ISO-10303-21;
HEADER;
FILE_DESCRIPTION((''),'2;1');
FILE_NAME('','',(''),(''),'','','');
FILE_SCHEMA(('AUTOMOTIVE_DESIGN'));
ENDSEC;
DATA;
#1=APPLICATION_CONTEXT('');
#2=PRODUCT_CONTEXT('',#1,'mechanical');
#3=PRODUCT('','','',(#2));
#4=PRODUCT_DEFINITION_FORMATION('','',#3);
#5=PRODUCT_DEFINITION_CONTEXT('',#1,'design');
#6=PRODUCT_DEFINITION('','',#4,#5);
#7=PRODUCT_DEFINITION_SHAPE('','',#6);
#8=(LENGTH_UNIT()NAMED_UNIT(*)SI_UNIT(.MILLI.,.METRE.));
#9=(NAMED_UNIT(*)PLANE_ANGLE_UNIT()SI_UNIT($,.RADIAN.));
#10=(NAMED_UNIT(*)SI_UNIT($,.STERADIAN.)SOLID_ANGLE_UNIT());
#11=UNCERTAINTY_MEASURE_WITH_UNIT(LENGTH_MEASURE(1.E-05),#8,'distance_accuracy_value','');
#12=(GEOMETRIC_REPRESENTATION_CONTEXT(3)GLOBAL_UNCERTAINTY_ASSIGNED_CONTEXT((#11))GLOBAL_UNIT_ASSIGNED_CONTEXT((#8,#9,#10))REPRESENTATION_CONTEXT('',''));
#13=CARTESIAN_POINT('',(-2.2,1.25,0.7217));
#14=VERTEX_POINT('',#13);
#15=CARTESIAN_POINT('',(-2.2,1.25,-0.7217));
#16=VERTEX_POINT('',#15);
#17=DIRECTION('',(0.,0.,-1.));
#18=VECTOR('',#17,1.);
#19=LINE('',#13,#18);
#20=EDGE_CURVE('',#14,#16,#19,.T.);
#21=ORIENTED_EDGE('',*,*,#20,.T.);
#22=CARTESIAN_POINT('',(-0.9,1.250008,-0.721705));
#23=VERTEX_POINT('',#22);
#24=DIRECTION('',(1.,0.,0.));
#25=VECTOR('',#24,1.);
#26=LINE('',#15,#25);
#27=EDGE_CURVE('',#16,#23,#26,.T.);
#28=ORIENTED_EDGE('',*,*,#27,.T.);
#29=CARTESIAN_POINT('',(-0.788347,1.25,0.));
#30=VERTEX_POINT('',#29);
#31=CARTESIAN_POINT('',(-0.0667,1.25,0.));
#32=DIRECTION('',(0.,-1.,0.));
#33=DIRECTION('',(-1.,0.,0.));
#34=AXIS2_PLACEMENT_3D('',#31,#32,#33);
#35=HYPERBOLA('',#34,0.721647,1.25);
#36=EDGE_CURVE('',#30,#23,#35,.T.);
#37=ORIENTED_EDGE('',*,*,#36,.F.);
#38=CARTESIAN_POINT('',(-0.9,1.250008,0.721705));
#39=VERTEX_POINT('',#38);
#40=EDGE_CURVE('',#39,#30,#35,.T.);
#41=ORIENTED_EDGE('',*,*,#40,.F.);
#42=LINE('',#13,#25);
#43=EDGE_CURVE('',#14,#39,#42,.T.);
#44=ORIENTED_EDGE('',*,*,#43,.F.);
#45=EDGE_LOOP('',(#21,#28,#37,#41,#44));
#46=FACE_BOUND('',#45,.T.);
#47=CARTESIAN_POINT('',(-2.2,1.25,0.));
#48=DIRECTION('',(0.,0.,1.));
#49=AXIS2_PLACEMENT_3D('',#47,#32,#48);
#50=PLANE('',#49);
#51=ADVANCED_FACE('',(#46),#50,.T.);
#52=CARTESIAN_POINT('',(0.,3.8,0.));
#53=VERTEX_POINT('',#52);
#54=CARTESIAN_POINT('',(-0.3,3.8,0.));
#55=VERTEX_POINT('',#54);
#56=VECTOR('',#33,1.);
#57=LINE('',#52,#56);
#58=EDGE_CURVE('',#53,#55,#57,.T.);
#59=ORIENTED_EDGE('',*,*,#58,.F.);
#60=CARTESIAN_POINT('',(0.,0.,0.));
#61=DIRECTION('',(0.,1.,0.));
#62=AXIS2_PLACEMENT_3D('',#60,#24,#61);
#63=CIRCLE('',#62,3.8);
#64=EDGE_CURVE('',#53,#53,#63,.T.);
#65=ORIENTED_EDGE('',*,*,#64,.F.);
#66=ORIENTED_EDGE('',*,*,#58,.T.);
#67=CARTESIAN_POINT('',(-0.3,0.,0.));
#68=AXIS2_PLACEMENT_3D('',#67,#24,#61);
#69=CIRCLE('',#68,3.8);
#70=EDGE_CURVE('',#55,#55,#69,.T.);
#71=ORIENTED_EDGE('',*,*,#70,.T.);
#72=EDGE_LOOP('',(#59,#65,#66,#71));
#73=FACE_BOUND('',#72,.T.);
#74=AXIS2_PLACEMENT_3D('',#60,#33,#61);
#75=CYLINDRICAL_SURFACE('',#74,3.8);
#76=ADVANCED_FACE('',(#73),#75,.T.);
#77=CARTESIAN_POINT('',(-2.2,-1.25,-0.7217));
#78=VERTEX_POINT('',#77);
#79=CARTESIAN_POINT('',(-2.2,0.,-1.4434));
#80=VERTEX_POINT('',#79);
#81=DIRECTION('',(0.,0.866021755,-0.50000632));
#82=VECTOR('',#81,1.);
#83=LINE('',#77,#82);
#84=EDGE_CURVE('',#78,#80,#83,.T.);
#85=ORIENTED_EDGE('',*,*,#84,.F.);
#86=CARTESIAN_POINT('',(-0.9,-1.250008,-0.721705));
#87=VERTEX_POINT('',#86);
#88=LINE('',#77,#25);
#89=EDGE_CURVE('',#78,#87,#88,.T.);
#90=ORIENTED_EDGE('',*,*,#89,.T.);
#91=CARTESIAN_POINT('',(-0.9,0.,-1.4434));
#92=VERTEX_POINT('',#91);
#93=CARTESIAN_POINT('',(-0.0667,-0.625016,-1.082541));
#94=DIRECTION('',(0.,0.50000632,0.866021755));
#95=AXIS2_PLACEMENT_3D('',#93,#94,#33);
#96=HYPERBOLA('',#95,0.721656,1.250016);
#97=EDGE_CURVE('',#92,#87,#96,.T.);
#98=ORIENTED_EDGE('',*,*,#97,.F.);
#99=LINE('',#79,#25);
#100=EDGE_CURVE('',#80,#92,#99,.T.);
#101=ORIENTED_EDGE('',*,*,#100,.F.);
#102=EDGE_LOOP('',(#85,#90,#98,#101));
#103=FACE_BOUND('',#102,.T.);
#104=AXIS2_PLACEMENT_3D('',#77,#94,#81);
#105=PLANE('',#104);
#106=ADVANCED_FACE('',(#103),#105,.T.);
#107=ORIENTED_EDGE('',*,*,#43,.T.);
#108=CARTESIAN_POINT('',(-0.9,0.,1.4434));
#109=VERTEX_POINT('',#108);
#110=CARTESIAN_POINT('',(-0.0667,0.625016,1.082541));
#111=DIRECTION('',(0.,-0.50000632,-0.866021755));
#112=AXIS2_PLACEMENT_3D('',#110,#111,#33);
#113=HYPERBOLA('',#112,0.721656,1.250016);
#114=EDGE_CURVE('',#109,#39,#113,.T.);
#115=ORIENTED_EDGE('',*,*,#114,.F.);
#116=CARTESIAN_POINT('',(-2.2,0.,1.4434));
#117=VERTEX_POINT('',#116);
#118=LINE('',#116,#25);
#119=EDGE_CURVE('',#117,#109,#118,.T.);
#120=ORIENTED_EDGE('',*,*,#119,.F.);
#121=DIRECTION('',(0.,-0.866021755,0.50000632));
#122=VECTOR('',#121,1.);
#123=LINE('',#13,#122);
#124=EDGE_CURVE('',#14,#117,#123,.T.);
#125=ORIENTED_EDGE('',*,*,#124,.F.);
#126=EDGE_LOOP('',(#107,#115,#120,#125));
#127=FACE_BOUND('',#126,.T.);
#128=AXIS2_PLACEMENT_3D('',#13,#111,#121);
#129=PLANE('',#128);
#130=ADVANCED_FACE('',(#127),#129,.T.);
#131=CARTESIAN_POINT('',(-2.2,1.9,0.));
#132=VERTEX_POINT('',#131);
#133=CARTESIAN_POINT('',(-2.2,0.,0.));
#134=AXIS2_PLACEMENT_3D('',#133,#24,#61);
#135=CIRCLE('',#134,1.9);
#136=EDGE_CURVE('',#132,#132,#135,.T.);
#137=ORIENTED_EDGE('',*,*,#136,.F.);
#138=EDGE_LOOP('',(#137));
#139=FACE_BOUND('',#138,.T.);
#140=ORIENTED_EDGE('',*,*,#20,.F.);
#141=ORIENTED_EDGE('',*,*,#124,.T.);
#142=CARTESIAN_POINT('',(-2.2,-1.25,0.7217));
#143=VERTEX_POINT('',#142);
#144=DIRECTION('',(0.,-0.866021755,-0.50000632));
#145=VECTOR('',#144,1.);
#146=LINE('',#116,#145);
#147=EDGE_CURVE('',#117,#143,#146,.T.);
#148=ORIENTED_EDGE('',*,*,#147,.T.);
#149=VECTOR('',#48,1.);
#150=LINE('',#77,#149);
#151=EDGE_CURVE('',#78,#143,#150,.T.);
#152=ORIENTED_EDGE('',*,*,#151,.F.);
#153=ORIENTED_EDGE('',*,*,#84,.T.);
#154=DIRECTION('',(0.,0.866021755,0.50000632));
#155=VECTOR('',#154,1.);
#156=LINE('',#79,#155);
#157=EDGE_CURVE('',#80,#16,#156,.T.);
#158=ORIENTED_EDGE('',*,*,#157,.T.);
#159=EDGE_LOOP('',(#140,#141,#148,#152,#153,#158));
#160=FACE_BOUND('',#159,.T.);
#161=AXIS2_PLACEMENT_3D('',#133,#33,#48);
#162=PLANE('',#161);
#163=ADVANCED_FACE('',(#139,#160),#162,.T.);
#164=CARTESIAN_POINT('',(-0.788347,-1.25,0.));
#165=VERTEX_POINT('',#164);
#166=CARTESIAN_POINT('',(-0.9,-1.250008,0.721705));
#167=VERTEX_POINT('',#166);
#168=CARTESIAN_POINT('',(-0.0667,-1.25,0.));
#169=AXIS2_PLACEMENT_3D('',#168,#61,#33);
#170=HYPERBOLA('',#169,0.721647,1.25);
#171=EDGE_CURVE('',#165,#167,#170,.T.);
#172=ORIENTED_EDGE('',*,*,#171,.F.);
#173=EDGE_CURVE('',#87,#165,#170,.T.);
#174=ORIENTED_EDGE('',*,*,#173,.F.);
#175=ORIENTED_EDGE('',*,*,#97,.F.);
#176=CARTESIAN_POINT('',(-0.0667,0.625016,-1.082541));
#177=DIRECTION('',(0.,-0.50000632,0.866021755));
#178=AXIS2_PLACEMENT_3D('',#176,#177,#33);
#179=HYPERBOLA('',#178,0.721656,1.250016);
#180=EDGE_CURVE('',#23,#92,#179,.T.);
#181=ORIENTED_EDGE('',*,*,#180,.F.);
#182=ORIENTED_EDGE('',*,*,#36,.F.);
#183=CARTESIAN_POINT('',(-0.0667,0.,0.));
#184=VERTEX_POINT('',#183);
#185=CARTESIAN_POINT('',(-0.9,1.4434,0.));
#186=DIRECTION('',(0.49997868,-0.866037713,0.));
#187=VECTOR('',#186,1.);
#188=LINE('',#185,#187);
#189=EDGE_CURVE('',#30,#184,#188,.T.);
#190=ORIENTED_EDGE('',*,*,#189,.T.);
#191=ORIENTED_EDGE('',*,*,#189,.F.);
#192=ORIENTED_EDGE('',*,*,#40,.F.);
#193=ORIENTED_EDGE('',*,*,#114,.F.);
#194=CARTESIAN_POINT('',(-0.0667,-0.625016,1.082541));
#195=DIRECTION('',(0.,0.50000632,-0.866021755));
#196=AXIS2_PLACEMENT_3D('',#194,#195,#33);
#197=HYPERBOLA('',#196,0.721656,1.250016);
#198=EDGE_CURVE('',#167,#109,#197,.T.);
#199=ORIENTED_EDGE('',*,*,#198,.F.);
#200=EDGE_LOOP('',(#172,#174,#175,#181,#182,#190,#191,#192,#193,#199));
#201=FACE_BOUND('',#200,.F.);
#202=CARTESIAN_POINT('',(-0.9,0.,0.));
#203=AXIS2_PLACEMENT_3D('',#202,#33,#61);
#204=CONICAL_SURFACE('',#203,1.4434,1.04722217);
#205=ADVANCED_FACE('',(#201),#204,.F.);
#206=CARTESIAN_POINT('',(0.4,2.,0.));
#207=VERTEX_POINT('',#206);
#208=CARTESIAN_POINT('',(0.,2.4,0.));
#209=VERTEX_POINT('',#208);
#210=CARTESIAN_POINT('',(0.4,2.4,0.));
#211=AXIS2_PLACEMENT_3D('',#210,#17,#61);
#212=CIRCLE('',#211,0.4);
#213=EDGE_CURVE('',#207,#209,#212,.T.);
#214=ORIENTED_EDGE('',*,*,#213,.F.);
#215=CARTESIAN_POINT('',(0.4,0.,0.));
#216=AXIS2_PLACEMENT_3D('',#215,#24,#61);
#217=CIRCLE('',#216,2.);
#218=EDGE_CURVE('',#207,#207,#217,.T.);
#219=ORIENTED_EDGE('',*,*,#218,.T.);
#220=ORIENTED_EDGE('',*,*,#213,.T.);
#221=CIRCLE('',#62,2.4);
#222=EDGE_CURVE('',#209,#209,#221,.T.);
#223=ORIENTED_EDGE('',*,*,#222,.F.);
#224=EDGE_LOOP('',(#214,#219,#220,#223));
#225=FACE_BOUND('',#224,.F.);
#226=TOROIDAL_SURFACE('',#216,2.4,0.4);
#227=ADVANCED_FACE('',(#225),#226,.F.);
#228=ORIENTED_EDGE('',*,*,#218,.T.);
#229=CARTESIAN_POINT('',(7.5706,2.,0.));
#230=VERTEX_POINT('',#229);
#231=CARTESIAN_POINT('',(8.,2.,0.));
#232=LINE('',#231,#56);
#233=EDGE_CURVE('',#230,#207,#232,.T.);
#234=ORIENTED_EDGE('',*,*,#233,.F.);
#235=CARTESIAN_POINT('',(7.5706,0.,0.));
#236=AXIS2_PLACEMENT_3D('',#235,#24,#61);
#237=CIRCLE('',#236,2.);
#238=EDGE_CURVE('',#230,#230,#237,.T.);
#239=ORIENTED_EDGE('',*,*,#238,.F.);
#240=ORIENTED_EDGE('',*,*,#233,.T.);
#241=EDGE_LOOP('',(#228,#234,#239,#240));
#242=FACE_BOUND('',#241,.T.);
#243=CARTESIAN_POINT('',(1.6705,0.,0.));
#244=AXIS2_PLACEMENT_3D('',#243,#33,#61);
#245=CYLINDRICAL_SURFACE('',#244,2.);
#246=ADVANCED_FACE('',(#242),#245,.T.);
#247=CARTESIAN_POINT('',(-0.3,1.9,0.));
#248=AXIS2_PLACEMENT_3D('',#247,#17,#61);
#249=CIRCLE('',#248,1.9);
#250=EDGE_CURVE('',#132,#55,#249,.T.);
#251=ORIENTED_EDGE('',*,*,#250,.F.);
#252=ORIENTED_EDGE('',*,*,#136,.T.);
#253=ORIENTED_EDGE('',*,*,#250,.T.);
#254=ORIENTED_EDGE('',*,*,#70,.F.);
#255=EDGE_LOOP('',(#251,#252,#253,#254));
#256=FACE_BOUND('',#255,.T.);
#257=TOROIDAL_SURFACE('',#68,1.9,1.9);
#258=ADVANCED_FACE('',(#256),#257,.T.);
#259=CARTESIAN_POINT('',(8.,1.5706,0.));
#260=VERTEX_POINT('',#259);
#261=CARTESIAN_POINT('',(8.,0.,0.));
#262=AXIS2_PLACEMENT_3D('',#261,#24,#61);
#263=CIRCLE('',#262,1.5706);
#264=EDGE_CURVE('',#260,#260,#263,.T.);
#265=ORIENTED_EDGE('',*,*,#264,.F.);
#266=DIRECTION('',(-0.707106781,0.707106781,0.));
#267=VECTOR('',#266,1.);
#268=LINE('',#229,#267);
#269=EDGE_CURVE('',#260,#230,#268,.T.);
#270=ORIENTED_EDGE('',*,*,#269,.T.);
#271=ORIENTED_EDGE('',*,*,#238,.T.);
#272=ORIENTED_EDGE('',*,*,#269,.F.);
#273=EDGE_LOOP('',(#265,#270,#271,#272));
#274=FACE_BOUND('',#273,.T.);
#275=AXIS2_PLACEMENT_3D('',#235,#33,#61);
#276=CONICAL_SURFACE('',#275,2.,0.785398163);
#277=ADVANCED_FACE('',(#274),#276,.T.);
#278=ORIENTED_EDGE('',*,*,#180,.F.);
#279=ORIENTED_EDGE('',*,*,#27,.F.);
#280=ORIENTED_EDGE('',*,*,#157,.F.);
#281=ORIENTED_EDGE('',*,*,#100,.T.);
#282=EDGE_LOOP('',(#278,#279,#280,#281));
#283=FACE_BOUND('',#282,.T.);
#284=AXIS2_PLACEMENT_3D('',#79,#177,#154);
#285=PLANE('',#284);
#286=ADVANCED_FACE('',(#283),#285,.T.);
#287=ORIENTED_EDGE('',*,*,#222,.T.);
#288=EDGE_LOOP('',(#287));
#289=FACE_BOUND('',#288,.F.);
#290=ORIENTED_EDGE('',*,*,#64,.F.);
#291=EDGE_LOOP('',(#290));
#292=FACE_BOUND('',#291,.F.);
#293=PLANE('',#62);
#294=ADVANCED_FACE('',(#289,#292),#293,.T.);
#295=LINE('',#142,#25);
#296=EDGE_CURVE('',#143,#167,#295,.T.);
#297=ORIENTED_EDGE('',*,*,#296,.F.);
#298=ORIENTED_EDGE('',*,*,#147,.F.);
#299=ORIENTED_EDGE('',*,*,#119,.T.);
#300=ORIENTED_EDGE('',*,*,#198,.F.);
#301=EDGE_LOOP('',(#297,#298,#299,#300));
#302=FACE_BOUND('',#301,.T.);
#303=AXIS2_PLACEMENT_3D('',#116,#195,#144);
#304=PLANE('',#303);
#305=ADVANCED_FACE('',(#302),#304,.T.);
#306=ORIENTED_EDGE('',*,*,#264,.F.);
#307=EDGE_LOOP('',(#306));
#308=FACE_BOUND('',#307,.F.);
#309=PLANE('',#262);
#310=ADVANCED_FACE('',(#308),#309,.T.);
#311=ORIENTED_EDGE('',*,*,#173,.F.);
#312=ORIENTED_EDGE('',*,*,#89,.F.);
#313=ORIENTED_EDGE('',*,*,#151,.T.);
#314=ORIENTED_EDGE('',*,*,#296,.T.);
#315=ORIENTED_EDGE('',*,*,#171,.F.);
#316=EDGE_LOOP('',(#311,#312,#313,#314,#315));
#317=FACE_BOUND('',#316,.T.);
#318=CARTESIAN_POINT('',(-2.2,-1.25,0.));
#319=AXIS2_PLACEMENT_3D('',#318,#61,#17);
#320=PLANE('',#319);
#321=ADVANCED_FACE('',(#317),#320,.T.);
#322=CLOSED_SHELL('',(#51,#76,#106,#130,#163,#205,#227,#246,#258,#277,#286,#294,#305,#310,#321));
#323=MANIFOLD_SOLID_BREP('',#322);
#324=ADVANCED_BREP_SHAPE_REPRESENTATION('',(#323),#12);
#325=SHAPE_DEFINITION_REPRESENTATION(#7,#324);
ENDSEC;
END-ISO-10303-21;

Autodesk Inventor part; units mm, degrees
ref_plane "YZ Plane" through (0, 0, 0) normal (1, 0, 0) x (0, 1, 0)
ref_plane "XZ Plane" through (0, 0, 0) normal (0, 1, 0) x (-1, 0, 0)
sketch "Эскиз1" plane through (0, 0, 0) normal (0, 0, 1) x (1, 0, 0)
  line L0 (-0.0667, 0) -> (8, 0)
  line L1 (8, 0) -> (8, 2)
  line L2 (8, 2) -> (2.1, 2)
  line L3 (2.1, 2) -> (1.6705, 2)
  line L4 (1.6705, 2) -> (0, 2)
  line L5 (0, 2) -> (0, 3.8)
  line L6 (0, 3.8) -> (-2.2, 3.8)
  line L7 (-2.2, 3.8) -> (-2.2, 1.4434)
  line L8 (-2.2, 1.4434) -> (-0.9, 1.4434)
  line L9 (-0.9, 1.4434) -> (-0.0667, 0)
  line L10 (-4.24, 0) -> (10.04, 0) projected
  line L11 (0, -0.76) -> (0, 4.56) projected
  line L12 (2.1, 2) -> (0, 2) construction
  dimension "d1" = 5.9
  dimension "d2" = 0.4295
  dimension "d3" = 2.2
  dimension "d4" = 1.3
  dimension "d5" = 60
  dimension "d6" = 4
  dimension "d7" = 4
  dimension "d8" = 2.8868
  dimension "d9" = 7.6
  dimension "d26" = 8
revolve "Базовый элемент" add sketch "Эскиз1" angle 360 about axis through (-0.0667, 0, 0) along (1, 0, 0)
sketch "Эскиз2" plane through (-2.2, 0, 0) normal (-1, 0, 0) x (0, 0, 1)
  circle A0 centre (0, 0) radius 1.4434 projected
  line L0 (0, -5.32) -> (0, 5.32) projected
  line L1 (-5.32, 0) -> (5.32, 0) projected
  line L2 (1.4434, 0) -> (0.7217, -1.25)
  line L3 (0.7217, -1.25) -> (-0.7217, -1.25)
  line L4 (-0.7217, -1.25) -> (-1.4434, 0)
  line L5 (-1.4434, 0) -> (-0.7217, 1.25)
  line L6 (-0.7217, 1.25) -> (0.7217, 1.25)
  line L7 (0.7217, 1.25) -> (1.4434, 0)
  point P0 (0, 0)
extrude "Паз" add sketch "Эскиз2" against normal up to next contours L7 A0 | A0 L2 | L6 L0 A0 | A0 L0 L3 | L0 L6 A0 | A0 L3 L0 | L4 A0 | A0 L5
fillet "Сопряжение1" radius 1.9 1 edges at (-2.2, -3.8, 0)
thread "Резьба" size "M4x0.7" class "6g" standard "ISO Metric profile" length 5.9
chamfer "Фаска1" distance 0.4294 distance2 0.4294 1 edges at (8, -2, 0) measured on face at (8, 0.556, 0.0273)
ref_plane "Work Plane1" through (29, 0, 0) normal (0, -1, 0) x (1, 0, 0)
fillet "Сопряжение2" radius 0.4 1 edges at (0, -2, 0)
equation "\"d17\" = RR"
equation "\"d13\" = GEL"
equation "\"d15\" = -0.5 * SPD + 0.5 * GD"
equation "\"d16\" = GUL"
equation "\"d30\" = R"
equation "\"d1\" = GEL"
equation "\"d3\" = KOH"
equation "\"d4\" = INTI"
equation "\"d6\" = GD"
equation "\"d7\" = BDM"
equation "\"d8\" = 1.1547 * SW"
equation "\"d9\" = KOD"
equation "\"d26\" = NLG"
equation "\"GD\" = NND"
equation "\"NLG\" = 8"
equation "\"GEL\" = 5.9"
equation "\"KOD\" = 7.6"
equation "\"KOH\" = 2.2"
equation "\"INTI\" = 1.3"
equation "\"GAL\" = 0.61345 * PTC"
equation "\"GUL\" = 0.61345 * PTC"
equation "\"BDM\" = NND"
equation "\"SW\" = 2.5"
equation "\"RR\" = 1.9"
equation "\"SPD\" = NND - 1.2269 * PTC"
equation "\"R\" = 0.4"
equation "\"TOA\" = 30deg"
equation "\"GD1\" = THREADDIA - 1.2269 * PTC"
equation "\"THREADDIA\" = 4"
equation "\"PTC\" = 0.7"
equation "\"NND\" = 4"
equation "\"KOH1\" = 0.3"
equation "\"E0\" = 2.873"
properties part number "ISO 7380-1 - M4 x 8" material "Сталь"
